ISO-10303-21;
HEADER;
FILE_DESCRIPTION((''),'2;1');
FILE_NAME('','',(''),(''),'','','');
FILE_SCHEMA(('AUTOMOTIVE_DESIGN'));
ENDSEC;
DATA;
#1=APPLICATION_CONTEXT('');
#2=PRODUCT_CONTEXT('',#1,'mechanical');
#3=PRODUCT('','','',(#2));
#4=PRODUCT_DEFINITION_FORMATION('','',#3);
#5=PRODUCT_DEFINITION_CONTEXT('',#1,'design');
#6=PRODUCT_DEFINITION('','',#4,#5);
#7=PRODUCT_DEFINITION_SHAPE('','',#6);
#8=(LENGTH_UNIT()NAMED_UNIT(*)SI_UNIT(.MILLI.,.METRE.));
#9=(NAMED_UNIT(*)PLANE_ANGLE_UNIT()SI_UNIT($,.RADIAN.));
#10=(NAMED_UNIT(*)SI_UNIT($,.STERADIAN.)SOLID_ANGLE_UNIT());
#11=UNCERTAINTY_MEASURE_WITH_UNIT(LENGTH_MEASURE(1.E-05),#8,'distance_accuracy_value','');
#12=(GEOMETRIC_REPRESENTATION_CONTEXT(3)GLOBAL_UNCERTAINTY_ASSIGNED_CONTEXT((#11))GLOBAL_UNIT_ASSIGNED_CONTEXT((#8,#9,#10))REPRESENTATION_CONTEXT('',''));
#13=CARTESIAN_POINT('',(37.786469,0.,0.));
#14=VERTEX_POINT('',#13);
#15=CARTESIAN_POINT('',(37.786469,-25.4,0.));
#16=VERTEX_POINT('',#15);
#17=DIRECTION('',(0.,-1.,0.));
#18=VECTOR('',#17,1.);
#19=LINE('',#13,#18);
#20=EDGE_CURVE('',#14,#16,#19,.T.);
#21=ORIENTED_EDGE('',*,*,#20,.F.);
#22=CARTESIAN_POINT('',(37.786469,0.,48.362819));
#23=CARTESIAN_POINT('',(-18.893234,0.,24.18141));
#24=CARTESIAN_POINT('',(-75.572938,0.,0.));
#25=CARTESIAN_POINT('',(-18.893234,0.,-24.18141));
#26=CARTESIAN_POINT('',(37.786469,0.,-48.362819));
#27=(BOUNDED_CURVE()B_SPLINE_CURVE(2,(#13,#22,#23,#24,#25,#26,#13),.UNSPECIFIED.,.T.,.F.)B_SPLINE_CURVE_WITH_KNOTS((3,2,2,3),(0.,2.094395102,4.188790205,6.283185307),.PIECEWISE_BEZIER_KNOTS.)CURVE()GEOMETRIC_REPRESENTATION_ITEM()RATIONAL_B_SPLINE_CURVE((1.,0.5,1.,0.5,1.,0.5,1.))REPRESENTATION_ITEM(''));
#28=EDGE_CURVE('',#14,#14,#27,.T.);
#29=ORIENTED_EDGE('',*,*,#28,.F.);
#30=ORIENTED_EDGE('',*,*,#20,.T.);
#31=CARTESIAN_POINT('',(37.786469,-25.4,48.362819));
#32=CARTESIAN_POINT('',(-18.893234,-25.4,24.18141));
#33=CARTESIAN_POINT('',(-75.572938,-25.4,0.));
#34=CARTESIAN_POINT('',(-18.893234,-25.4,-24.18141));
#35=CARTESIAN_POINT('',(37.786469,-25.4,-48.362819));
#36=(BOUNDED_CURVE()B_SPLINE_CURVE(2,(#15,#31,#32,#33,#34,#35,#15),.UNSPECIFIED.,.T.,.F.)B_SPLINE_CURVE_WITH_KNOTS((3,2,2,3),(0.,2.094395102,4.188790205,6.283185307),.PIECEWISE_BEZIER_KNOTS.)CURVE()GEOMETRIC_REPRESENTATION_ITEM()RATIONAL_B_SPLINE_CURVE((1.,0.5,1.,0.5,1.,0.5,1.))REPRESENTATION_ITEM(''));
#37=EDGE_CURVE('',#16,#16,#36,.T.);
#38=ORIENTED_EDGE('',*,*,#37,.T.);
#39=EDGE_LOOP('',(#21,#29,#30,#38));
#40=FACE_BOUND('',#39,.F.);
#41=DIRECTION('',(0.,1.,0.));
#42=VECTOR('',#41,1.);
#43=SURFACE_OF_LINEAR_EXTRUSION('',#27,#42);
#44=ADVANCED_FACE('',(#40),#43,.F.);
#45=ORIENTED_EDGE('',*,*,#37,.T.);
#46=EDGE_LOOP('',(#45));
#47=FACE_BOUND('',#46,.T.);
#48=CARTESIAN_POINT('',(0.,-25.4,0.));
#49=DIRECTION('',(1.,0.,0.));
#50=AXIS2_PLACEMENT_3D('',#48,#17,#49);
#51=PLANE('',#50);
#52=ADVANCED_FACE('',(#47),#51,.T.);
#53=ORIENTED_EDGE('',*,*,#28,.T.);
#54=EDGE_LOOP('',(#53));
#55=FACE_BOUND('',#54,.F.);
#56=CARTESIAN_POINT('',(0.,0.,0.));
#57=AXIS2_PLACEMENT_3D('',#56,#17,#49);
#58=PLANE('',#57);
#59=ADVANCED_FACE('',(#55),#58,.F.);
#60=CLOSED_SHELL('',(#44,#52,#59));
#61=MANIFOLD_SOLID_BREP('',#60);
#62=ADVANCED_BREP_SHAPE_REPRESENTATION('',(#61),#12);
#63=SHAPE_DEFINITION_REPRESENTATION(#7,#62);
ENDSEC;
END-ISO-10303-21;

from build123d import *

# Parameters (mm, degrees)
F3_DEPTH = 25.4
F2_R     = 5.328555548
F4_DEPTH = 25.4


# Not quite as in the source:
# - the program builds the solid bodies; features that only make, move or delete a surface that nothing else refers to are left out


with BuildPart() as f3:
    # F0 (on Front) → F3 (new body)
    with BuildSketch(Plane.XZ):
        with BuildLine():
            add(Edge.make_bspline(
                [(37.7864688635, 0), (37.7864688635, 48.3628191549), (-18.8932344317, 24.1814095774), (-75.572937727, 0), (-18.8932344317, -24.1814095774), (37.7864688635, -48.3628191549), (37.7864688635, 0)],
                knots=[0, 0, 0, 2.0943951024, 2.0943951024, 4.1887902048, 4.1887902048, 6.2831853072, 6.2831853072, 6.2831853072], degree=2, weights=[1, 0.5, 1, 0.5, 1, 0.5, 1]))
        make_face()
    extrude(amount=F3_DEPTH)

    # F2 (on face) → F4 (cut)
    with BuildSketch(Plane.XZ):
        Circle(F2_R)
    extrude(amount=-F4_DEPTH, mode=Mode.SUBTRACT)


solid = f3.part
